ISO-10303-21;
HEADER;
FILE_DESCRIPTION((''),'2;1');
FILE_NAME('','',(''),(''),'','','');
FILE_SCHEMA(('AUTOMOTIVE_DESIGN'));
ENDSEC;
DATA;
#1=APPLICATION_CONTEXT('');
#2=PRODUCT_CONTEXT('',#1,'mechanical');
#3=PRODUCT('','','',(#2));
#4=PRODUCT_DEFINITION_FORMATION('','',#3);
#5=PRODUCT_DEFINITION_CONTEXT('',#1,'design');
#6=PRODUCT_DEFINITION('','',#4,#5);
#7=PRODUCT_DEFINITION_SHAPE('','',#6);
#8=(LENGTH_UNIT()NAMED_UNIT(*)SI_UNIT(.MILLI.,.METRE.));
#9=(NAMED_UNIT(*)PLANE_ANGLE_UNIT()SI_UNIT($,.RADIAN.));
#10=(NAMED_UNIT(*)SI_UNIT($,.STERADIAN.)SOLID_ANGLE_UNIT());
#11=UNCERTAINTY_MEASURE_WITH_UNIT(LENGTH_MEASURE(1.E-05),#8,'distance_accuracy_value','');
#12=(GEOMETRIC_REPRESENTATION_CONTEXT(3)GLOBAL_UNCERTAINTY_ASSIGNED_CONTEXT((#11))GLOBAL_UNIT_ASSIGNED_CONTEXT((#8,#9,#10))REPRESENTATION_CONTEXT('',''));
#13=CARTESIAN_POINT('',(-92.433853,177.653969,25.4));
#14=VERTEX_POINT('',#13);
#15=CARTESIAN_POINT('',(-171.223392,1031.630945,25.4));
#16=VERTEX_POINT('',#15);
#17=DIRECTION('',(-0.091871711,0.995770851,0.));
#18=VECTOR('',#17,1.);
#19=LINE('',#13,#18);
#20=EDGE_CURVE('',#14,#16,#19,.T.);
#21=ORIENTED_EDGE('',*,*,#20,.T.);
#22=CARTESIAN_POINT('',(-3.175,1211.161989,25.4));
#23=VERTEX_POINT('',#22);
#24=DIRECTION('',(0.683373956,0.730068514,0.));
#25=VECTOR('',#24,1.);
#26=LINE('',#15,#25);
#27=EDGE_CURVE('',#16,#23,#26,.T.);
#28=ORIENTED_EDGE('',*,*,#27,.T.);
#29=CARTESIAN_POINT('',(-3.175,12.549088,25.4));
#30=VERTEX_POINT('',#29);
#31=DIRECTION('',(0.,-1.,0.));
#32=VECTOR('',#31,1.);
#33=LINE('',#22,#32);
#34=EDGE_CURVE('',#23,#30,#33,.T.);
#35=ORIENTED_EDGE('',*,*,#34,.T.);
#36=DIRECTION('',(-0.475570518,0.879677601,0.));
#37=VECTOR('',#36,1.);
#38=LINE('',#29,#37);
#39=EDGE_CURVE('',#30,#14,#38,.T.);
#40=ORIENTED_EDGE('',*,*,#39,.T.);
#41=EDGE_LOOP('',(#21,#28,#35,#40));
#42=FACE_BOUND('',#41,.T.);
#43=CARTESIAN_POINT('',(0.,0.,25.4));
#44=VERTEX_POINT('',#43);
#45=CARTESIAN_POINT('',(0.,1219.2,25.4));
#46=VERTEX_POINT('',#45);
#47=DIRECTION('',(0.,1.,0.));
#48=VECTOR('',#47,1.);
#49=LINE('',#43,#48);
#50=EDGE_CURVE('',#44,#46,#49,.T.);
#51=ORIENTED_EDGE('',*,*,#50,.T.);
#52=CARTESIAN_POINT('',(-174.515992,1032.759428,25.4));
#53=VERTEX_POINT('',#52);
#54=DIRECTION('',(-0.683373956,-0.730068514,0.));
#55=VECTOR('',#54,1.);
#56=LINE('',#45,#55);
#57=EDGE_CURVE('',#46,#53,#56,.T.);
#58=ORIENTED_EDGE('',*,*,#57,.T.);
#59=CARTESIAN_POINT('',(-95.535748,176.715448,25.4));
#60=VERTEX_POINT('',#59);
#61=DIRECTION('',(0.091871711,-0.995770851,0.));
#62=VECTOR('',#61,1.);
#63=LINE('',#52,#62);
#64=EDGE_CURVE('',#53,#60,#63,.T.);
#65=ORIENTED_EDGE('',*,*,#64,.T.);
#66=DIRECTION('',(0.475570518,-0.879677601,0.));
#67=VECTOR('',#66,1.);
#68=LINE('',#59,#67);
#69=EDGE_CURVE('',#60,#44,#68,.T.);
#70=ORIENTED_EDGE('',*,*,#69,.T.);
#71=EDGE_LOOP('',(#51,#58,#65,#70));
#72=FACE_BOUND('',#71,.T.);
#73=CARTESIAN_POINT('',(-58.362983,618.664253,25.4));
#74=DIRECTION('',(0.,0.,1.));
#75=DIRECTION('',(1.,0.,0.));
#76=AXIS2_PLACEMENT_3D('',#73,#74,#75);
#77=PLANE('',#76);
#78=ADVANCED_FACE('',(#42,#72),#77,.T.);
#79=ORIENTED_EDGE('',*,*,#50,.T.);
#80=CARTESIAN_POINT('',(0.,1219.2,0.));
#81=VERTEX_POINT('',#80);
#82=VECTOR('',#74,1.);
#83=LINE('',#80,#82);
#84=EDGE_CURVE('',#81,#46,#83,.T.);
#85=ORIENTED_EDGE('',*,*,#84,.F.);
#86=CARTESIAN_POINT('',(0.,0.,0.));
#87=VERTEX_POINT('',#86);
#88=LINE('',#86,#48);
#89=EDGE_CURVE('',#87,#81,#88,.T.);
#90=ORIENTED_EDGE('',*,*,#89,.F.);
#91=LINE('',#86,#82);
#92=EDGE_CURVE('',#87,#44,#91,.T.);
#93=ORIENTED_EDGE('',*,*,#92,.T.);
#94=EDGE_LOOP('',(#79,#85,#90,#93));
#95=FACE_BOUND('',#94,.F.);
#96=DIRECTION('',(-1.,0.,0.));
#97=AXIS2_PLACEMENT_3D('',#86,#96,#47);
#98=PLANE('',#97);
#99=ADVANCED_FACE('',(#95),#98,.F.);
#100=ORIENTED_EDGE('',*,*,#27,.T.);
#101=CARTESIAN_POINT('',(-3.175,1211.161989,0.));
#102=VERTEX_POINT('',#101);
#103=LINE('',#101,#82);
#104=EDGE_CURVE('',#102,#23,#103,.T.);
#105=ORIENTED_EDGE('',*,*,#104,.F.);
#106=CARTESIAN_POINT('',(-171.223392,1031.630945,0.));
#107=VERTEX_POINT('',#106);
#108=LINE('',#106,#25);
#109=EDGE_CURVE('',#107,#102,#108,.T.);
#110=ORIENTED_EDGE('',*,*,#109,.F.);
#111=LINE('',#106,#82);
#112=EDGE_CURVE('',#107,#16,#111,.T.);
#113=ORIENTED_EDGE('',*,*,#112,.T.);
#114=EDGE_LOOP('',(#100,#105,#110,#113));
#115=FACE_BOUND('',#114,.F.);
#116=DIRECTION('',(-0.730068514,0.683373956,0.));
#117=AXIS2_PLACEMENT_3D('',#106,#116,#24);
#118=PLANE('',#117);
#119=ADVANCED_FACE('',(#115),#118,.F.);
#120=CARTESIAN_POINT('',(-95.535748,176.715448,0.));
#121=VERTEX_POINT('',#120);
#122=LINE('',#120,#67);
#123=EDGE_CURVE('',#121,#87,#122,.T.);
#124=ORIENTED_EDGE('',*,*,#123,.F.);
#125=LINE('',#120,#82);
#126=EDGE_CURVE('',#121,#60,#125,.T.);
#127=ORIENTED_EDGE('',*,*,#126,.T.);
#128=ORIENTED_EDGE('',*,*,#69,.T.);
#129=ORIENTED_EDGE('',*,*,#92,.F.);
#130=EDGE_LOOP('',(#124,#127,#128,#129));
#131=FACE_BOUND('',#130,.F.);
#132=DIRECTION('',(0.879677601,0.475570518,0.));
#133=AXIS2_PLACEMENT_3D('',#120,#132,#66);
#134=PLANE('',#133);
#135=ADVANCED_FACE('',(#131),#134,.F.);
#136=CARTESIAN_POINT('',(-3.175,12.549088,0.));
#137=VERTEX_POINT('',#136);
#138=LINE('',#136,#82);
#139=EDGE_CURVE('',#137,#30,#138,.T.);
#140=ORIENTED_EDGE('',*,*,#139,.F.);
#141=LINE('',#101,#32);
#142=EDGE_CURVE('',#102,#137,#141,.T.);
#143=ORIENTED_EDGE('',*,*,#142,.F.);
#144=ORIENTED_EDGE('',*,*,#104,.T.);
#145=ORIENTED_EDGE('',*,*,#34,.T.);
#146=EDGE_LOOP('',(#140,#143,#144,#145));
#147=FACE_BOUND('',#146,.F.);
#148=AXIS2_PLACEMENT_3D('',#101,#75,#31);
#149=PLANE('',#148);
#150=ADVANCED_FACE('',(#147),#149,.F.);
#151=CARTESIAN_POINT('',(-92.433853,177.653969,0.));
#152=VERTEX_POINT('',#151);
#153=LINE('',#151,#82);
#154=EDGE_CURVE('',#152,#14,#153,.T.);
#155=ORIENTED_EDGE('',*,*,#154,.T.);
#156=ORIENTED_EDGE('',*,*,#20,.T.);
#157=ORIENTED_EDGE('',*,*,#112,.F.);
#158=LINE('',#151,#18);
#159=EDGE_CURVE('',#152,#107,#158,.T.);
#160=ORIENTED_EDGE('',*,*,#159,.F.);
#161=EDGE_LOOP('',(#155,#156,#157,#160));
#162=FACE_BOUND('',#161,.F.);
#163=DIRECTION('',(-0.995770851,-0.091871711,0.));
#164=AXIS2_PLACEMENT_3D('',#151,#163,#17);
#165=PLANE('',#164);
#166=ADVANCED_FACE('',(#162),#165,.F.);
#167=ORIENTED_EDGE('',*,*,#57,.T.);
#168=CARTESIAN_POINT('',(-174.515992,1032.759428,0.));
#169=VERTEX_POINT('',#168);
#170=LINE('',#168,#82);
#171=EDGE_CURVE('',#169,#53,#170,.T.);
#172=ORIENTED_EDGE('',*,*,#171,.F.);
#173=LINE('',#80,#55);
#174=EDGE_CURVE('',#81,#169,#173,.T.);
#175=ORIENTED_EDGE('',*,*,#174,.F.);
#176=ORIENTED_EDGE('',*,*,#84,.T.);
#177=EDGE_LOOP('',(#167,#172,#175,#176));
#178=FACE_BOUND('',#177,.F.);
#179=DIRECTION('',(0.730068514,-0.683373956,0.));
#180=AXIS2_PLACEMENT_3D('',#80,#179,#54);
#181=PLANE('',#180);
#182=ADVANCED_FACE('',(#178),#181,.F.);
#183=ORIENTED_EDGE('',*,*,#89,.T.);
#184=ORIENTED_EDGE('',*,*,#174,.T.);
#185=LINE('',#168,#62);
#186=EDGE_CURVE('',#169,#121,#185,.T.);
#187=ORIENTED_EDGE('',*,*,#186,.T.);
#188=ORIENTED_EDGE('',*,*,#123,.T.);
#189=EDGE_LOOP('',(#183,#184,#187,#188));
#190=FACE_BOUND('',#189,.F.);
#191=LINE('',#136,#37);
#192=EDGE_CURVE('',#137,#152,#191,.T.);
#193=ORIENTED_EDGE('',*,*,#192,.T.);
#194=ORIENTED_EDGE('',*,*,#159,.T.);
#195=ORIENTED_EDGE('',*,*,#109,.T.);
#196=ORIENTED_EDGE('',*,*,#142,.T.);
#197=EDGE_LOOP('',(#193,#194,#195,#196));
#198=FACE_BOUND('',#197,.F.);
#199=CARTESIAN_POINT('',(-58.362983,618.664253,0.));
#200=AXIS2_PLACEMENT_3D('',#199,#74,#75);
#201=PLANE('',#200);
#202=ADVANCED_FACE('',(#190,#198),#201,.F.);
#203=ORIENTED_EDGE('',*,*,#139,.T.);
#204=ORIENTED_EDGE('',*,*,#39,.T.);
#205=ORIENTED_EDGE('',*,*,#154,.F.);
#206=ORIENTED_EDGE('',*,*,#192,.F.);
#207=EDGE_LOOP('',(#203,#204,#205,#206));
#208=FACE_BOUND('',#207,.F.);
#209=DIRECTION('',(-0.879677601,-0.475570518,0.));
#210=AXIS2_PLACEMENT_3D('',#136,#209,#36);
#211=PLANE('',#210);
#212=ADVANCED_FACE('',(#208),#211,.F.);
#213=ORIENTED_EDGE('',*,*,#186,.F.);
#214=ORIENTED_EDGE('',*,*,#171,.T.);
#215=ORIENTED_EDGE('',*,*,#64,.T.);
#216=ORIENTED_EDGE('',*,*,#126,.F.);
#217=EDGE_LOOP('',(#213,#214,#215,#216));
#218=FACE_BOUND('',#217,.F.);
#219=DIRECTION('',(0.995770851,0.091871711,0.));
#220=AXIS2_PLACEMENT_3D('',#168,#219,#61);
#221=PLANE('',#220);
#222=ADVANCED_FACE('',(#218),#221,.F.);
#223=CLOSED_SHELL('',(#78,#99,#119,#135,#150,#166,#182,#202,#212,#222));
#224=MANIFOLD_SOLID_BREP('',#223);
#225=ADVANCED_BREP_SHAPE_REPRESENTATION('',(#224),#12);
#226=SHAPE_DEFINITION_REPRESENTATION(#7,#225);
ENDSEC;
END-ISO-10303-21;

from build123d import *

# Parameters (mm, degrees)
F1_DEPTH = 25.4


# Not quite as in the source:
# - the program builds the solid bodies; features that only make, move or delete a surface that nothing else refers to are left out


with BuildPart() as f1:
    # F0 (on Top) → F1 (new body)
    with BuildSketch(Plane.XY):
        Polygon((-95.5357477069, 176.7154484987), (0, 0), (0, 1219.2), (-174.515992403, 1032.7594280243), align=None)
        Polygon((-171.2233918284, 1031.6309448815), (-3.175, 1211.1619887742), (-3.175, 12.5490882171), (-92.4338527853, 177.6539686524), align=None, mode=Mode.SUBTRACT)
    extrude(amount=F1_DEPTH)


solid = f1.part
